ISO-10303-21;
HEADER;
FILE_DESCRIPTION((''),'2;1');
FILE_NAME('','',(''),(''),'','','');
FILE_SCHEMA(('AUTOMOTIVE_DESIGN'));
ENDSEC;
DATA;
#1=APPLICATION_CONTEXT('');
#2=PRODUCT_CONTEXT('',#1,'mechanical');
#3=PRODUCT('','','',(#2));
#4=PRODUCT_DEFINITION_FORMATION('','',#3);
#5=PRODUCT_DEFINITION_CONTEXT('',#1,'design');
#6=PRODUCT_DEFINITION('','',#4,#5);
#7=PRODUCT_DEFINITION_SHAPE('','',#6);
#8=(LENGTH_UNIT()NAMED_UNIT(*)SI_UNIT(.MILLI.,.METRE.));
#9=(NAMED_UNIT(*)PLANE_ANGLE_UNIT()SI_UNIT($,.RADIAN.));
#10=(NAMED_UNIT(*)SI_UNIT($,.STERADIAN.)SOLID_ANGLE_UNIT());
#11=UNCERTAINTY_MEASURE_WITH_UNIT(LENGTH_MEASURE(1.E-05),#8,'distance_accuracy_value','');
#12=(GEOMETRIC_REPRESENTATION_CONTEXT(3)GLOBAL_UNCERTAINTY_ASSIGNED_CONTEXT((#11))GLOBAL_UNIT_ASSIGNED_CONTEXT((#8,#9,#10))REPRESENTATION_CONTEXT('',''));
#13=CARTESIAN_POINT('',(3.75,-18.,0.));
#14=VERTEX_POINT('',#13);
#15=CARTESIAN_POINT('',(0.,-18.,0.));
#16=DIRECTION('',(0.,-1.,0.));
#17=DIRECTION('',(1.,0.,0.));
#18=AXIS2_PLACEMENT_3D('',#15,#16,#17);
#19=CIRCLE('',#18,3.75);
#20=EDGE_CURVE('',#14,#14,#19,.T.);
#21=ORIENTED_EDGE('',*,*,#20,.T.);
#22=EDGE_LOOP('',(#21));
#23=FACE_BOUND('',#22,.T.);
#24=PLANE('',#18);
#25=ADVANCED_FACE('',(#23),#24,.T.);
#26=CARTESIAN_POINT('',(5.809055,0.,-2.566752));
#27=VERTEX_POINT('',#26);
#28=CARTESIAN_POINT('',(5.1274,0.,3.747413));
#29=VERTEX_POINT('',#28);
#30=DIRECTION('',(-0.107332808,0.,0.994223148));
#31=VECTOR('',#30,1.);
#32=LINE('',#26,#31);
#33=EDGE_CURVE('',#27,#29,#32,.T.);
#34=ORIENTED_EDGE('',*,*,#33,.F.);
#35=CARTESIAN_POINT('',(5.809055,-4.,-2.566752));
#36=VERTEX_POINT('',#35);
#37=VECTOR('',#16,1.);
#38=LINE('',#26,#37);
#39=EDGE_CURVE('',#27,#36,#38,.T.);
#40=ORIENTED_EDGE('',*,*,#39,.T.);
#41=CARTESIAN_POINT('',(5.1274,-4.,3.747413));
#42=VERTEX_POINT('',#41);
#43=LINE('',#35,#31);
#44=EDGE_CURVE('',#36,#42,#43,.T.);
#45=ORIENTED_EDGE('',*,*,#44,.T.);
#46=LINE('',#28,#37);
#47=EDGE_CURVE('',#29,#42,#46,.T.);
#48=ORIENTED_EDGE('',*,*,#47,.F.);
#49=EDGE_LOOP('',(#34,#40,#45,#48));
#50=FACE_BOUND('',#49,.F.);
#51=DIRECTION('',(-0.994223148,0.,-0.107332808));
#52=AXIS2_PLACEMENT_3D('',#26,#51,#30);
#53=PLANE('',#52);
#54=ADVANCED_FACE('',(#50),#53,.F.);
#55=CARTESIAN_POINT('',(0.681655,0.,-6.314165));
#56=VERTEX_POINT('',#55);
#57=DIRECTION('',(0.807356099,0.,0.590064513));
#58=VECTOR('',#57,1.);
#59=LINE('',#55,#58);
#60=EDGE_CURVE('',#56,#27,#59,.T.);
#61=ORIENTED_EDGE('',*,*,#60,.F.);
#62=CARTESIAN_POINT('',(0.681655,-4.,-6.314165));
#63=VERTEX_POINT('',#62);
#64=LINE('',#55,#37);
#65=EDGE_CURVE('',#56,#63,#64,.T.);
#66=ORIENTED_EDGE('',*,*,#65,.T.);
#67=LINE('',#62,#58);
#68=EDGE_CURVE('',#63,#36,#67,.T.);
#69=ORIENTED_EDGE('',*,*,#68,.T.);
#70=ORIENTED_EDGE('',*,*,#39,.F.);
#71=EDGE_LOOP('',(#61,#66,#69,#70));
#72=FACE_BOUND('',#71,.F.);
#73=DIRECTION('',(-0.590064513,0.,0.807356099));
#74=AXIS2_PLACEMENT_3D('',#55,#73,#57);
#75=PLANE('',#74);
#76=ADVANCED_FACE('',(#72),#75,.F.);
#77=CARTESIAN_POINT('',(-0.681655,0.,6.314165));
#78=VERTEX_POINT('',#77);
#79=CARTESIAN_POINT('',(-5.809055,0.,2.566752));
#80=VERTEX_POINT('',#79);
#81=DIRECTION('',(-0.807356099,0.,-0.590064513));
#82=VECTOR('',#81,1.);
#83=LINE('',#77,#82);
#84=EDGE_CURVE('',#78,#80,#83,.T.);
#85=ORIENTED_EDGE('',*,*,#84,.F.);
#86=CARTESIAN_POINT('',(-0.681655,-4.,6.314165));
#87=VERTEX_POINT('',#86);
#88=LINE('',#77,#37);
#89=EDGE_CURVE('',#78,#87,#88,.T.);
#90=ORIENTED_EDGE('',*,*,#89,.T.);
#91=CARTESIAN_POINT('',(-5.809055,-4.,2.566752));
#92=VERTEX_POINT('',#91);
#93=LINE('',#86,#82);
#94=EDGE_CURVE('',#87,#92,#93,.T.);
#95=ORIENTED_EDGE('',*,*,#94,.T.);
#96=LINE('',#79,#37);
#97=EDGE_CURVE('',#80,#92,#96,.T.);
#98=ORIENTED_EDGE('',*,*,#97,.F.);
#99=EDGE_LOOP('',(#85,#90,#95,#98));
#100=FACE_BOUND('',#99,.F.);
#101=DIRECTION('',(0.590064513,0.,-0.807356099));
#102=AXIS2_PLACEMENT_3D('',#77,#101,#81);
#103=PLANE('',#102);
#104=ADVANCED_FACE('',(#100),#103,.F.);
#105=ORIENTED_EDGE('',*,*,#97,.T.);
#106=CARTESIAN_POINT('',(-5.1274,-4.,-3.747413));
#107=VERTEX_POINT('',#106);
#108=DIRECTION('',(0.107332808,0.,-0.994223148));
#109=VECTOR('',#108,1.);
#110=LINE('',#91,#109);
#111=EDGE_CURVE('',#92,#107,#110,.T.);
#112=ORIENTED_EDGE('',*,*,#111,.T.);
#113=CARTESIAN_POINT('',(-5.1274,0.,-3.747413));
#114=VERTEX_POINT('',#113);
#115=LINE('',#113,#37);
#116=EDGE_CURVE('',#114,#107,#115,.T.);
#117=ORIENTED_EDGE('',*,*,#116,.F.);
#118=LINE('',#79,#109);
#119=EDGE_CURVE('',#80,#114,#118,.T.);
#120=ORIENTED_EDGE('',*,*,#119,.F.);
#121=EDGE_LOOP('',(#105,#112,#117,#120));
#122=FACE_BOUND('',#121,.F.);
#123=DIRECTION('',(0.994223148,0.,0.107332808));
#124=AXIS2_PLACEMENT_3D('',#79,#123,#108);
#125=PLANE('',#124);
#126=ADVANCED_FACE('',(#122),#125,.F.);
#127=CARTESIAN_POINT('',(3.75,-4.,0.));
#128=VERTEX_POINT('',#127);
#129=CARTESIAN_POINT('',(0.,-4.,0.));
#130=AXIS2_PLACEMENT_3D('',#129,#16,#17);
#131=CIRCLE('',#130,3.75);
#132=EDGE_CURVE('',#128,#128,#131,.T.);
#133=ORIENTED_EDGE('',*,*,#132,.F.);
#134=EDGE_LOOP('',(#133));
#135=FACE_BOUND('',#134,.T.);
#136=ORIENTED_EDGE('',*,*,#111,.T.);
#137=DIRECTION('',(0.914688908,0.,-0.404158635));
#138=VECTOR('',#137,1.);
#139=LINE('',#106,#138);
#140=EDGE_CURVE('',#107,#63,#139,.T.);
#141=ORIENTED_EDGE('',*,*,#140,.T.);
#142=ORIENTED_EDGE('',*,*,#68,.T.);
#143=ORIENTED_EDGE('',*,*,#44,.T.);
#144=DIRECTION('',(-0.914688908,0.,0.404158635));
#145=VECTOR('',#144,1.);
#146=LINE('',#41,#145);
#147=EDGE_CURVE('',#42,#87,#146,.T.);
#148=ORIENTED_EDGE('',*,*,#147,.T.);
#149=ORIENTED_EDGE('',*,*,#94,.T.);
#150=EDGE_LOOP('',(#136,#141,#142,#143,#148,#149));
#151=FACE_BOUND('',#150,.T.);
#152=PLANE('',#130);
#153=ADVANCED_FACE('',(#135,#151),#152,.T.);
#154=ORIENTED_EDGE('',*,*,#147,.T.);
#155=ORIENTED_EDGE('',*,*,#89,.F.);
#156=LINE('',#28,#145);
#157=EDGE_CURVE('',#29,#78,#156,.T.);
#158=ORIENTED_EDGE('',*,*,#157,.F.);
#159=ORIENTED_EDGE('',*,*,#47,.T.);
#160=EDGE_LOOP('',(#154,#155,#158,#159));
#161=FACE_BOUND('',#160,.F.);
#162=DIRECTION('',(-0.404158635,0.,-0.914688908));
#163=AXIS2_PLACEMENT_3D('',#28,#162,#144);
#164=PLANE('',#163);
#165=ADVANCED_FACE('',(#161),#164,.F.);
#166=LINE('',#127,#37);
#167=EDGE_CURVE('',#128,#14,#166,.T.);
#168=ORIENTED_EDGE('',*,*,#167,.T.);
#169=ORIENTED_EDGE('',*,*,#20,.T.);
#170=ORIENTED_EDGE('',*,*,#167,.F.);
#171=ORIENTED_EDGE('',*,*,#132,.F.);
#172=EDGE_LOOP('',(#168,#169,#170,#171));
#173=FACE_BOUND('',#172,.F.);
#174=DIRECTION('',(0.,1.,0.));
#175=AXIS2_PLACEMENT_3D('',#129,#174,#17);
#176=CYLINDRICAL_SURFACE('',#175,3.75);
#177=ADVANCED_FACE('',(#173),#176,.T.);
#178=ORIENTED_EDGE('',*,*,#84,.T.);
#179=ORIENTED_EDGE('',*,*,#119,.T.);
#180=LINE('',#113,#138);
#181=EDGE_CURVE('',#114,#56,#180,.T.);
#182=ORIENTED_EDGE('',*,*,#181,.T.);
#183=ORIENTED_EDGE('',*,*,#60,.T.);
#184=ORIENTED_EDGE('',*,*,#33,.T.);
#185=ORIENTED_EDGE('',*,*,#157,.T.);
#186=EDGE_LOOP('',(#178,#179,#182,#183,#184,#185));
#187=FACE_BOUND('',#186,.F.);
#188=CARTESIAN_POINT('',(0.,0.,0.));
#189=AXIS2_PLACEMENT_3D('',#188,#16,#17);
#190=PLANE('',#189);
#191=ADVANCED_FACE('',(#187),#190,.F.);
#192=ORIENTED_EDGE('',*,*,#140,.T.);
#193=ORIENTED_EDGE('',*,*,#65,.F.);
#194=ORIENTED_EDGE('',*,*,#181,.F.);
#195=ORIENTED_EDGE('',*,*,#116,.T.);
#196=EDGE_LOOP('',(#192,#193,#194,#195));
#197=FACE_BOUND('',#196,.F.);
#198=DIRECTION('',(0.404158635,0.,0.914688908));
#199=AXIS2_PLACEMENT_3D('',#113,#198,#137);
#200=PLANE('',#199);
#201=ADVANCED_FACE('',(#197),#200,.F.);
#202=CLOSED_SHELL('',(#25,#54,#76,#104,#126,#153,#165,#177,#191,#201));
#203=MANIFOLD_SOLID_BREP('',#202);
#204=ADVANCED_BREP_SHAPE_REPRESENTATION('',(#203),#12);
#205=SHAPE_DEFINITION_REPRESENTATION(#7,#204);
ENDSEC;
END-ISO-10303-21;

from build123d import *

# Parameters (mm, degrees)
F1_DEPTH = 4
F2_R     = 3.75
F3_DEPTH = 14


# Not quite as in the source:
# - a feature names something its author has since deleted; it is built from what else it names


with BuildPart() as f1:
    # F0 (on Front) → F1 (new body)
    with BuildSketch(Plane.XZ):
        Polygon((0.6816548843, -6.3141650241), (5.8090547568, -2.5667520656), (5.1273998724, 3.7474129585), (-0.6816548843, 6.3141650241), (-5.8090547568, 2.5667520656), (-5.1273998724, -3.7474129585), align=None)
    extrude(amount=F1_DEPTH)

    # F2 (on face) → F3 (join)
    with BuildSketch(Plane.XZ.offset(4)):
        Circle(F2_R)
    extrude(amount=F3_DEPTH)


solid = f1.part
